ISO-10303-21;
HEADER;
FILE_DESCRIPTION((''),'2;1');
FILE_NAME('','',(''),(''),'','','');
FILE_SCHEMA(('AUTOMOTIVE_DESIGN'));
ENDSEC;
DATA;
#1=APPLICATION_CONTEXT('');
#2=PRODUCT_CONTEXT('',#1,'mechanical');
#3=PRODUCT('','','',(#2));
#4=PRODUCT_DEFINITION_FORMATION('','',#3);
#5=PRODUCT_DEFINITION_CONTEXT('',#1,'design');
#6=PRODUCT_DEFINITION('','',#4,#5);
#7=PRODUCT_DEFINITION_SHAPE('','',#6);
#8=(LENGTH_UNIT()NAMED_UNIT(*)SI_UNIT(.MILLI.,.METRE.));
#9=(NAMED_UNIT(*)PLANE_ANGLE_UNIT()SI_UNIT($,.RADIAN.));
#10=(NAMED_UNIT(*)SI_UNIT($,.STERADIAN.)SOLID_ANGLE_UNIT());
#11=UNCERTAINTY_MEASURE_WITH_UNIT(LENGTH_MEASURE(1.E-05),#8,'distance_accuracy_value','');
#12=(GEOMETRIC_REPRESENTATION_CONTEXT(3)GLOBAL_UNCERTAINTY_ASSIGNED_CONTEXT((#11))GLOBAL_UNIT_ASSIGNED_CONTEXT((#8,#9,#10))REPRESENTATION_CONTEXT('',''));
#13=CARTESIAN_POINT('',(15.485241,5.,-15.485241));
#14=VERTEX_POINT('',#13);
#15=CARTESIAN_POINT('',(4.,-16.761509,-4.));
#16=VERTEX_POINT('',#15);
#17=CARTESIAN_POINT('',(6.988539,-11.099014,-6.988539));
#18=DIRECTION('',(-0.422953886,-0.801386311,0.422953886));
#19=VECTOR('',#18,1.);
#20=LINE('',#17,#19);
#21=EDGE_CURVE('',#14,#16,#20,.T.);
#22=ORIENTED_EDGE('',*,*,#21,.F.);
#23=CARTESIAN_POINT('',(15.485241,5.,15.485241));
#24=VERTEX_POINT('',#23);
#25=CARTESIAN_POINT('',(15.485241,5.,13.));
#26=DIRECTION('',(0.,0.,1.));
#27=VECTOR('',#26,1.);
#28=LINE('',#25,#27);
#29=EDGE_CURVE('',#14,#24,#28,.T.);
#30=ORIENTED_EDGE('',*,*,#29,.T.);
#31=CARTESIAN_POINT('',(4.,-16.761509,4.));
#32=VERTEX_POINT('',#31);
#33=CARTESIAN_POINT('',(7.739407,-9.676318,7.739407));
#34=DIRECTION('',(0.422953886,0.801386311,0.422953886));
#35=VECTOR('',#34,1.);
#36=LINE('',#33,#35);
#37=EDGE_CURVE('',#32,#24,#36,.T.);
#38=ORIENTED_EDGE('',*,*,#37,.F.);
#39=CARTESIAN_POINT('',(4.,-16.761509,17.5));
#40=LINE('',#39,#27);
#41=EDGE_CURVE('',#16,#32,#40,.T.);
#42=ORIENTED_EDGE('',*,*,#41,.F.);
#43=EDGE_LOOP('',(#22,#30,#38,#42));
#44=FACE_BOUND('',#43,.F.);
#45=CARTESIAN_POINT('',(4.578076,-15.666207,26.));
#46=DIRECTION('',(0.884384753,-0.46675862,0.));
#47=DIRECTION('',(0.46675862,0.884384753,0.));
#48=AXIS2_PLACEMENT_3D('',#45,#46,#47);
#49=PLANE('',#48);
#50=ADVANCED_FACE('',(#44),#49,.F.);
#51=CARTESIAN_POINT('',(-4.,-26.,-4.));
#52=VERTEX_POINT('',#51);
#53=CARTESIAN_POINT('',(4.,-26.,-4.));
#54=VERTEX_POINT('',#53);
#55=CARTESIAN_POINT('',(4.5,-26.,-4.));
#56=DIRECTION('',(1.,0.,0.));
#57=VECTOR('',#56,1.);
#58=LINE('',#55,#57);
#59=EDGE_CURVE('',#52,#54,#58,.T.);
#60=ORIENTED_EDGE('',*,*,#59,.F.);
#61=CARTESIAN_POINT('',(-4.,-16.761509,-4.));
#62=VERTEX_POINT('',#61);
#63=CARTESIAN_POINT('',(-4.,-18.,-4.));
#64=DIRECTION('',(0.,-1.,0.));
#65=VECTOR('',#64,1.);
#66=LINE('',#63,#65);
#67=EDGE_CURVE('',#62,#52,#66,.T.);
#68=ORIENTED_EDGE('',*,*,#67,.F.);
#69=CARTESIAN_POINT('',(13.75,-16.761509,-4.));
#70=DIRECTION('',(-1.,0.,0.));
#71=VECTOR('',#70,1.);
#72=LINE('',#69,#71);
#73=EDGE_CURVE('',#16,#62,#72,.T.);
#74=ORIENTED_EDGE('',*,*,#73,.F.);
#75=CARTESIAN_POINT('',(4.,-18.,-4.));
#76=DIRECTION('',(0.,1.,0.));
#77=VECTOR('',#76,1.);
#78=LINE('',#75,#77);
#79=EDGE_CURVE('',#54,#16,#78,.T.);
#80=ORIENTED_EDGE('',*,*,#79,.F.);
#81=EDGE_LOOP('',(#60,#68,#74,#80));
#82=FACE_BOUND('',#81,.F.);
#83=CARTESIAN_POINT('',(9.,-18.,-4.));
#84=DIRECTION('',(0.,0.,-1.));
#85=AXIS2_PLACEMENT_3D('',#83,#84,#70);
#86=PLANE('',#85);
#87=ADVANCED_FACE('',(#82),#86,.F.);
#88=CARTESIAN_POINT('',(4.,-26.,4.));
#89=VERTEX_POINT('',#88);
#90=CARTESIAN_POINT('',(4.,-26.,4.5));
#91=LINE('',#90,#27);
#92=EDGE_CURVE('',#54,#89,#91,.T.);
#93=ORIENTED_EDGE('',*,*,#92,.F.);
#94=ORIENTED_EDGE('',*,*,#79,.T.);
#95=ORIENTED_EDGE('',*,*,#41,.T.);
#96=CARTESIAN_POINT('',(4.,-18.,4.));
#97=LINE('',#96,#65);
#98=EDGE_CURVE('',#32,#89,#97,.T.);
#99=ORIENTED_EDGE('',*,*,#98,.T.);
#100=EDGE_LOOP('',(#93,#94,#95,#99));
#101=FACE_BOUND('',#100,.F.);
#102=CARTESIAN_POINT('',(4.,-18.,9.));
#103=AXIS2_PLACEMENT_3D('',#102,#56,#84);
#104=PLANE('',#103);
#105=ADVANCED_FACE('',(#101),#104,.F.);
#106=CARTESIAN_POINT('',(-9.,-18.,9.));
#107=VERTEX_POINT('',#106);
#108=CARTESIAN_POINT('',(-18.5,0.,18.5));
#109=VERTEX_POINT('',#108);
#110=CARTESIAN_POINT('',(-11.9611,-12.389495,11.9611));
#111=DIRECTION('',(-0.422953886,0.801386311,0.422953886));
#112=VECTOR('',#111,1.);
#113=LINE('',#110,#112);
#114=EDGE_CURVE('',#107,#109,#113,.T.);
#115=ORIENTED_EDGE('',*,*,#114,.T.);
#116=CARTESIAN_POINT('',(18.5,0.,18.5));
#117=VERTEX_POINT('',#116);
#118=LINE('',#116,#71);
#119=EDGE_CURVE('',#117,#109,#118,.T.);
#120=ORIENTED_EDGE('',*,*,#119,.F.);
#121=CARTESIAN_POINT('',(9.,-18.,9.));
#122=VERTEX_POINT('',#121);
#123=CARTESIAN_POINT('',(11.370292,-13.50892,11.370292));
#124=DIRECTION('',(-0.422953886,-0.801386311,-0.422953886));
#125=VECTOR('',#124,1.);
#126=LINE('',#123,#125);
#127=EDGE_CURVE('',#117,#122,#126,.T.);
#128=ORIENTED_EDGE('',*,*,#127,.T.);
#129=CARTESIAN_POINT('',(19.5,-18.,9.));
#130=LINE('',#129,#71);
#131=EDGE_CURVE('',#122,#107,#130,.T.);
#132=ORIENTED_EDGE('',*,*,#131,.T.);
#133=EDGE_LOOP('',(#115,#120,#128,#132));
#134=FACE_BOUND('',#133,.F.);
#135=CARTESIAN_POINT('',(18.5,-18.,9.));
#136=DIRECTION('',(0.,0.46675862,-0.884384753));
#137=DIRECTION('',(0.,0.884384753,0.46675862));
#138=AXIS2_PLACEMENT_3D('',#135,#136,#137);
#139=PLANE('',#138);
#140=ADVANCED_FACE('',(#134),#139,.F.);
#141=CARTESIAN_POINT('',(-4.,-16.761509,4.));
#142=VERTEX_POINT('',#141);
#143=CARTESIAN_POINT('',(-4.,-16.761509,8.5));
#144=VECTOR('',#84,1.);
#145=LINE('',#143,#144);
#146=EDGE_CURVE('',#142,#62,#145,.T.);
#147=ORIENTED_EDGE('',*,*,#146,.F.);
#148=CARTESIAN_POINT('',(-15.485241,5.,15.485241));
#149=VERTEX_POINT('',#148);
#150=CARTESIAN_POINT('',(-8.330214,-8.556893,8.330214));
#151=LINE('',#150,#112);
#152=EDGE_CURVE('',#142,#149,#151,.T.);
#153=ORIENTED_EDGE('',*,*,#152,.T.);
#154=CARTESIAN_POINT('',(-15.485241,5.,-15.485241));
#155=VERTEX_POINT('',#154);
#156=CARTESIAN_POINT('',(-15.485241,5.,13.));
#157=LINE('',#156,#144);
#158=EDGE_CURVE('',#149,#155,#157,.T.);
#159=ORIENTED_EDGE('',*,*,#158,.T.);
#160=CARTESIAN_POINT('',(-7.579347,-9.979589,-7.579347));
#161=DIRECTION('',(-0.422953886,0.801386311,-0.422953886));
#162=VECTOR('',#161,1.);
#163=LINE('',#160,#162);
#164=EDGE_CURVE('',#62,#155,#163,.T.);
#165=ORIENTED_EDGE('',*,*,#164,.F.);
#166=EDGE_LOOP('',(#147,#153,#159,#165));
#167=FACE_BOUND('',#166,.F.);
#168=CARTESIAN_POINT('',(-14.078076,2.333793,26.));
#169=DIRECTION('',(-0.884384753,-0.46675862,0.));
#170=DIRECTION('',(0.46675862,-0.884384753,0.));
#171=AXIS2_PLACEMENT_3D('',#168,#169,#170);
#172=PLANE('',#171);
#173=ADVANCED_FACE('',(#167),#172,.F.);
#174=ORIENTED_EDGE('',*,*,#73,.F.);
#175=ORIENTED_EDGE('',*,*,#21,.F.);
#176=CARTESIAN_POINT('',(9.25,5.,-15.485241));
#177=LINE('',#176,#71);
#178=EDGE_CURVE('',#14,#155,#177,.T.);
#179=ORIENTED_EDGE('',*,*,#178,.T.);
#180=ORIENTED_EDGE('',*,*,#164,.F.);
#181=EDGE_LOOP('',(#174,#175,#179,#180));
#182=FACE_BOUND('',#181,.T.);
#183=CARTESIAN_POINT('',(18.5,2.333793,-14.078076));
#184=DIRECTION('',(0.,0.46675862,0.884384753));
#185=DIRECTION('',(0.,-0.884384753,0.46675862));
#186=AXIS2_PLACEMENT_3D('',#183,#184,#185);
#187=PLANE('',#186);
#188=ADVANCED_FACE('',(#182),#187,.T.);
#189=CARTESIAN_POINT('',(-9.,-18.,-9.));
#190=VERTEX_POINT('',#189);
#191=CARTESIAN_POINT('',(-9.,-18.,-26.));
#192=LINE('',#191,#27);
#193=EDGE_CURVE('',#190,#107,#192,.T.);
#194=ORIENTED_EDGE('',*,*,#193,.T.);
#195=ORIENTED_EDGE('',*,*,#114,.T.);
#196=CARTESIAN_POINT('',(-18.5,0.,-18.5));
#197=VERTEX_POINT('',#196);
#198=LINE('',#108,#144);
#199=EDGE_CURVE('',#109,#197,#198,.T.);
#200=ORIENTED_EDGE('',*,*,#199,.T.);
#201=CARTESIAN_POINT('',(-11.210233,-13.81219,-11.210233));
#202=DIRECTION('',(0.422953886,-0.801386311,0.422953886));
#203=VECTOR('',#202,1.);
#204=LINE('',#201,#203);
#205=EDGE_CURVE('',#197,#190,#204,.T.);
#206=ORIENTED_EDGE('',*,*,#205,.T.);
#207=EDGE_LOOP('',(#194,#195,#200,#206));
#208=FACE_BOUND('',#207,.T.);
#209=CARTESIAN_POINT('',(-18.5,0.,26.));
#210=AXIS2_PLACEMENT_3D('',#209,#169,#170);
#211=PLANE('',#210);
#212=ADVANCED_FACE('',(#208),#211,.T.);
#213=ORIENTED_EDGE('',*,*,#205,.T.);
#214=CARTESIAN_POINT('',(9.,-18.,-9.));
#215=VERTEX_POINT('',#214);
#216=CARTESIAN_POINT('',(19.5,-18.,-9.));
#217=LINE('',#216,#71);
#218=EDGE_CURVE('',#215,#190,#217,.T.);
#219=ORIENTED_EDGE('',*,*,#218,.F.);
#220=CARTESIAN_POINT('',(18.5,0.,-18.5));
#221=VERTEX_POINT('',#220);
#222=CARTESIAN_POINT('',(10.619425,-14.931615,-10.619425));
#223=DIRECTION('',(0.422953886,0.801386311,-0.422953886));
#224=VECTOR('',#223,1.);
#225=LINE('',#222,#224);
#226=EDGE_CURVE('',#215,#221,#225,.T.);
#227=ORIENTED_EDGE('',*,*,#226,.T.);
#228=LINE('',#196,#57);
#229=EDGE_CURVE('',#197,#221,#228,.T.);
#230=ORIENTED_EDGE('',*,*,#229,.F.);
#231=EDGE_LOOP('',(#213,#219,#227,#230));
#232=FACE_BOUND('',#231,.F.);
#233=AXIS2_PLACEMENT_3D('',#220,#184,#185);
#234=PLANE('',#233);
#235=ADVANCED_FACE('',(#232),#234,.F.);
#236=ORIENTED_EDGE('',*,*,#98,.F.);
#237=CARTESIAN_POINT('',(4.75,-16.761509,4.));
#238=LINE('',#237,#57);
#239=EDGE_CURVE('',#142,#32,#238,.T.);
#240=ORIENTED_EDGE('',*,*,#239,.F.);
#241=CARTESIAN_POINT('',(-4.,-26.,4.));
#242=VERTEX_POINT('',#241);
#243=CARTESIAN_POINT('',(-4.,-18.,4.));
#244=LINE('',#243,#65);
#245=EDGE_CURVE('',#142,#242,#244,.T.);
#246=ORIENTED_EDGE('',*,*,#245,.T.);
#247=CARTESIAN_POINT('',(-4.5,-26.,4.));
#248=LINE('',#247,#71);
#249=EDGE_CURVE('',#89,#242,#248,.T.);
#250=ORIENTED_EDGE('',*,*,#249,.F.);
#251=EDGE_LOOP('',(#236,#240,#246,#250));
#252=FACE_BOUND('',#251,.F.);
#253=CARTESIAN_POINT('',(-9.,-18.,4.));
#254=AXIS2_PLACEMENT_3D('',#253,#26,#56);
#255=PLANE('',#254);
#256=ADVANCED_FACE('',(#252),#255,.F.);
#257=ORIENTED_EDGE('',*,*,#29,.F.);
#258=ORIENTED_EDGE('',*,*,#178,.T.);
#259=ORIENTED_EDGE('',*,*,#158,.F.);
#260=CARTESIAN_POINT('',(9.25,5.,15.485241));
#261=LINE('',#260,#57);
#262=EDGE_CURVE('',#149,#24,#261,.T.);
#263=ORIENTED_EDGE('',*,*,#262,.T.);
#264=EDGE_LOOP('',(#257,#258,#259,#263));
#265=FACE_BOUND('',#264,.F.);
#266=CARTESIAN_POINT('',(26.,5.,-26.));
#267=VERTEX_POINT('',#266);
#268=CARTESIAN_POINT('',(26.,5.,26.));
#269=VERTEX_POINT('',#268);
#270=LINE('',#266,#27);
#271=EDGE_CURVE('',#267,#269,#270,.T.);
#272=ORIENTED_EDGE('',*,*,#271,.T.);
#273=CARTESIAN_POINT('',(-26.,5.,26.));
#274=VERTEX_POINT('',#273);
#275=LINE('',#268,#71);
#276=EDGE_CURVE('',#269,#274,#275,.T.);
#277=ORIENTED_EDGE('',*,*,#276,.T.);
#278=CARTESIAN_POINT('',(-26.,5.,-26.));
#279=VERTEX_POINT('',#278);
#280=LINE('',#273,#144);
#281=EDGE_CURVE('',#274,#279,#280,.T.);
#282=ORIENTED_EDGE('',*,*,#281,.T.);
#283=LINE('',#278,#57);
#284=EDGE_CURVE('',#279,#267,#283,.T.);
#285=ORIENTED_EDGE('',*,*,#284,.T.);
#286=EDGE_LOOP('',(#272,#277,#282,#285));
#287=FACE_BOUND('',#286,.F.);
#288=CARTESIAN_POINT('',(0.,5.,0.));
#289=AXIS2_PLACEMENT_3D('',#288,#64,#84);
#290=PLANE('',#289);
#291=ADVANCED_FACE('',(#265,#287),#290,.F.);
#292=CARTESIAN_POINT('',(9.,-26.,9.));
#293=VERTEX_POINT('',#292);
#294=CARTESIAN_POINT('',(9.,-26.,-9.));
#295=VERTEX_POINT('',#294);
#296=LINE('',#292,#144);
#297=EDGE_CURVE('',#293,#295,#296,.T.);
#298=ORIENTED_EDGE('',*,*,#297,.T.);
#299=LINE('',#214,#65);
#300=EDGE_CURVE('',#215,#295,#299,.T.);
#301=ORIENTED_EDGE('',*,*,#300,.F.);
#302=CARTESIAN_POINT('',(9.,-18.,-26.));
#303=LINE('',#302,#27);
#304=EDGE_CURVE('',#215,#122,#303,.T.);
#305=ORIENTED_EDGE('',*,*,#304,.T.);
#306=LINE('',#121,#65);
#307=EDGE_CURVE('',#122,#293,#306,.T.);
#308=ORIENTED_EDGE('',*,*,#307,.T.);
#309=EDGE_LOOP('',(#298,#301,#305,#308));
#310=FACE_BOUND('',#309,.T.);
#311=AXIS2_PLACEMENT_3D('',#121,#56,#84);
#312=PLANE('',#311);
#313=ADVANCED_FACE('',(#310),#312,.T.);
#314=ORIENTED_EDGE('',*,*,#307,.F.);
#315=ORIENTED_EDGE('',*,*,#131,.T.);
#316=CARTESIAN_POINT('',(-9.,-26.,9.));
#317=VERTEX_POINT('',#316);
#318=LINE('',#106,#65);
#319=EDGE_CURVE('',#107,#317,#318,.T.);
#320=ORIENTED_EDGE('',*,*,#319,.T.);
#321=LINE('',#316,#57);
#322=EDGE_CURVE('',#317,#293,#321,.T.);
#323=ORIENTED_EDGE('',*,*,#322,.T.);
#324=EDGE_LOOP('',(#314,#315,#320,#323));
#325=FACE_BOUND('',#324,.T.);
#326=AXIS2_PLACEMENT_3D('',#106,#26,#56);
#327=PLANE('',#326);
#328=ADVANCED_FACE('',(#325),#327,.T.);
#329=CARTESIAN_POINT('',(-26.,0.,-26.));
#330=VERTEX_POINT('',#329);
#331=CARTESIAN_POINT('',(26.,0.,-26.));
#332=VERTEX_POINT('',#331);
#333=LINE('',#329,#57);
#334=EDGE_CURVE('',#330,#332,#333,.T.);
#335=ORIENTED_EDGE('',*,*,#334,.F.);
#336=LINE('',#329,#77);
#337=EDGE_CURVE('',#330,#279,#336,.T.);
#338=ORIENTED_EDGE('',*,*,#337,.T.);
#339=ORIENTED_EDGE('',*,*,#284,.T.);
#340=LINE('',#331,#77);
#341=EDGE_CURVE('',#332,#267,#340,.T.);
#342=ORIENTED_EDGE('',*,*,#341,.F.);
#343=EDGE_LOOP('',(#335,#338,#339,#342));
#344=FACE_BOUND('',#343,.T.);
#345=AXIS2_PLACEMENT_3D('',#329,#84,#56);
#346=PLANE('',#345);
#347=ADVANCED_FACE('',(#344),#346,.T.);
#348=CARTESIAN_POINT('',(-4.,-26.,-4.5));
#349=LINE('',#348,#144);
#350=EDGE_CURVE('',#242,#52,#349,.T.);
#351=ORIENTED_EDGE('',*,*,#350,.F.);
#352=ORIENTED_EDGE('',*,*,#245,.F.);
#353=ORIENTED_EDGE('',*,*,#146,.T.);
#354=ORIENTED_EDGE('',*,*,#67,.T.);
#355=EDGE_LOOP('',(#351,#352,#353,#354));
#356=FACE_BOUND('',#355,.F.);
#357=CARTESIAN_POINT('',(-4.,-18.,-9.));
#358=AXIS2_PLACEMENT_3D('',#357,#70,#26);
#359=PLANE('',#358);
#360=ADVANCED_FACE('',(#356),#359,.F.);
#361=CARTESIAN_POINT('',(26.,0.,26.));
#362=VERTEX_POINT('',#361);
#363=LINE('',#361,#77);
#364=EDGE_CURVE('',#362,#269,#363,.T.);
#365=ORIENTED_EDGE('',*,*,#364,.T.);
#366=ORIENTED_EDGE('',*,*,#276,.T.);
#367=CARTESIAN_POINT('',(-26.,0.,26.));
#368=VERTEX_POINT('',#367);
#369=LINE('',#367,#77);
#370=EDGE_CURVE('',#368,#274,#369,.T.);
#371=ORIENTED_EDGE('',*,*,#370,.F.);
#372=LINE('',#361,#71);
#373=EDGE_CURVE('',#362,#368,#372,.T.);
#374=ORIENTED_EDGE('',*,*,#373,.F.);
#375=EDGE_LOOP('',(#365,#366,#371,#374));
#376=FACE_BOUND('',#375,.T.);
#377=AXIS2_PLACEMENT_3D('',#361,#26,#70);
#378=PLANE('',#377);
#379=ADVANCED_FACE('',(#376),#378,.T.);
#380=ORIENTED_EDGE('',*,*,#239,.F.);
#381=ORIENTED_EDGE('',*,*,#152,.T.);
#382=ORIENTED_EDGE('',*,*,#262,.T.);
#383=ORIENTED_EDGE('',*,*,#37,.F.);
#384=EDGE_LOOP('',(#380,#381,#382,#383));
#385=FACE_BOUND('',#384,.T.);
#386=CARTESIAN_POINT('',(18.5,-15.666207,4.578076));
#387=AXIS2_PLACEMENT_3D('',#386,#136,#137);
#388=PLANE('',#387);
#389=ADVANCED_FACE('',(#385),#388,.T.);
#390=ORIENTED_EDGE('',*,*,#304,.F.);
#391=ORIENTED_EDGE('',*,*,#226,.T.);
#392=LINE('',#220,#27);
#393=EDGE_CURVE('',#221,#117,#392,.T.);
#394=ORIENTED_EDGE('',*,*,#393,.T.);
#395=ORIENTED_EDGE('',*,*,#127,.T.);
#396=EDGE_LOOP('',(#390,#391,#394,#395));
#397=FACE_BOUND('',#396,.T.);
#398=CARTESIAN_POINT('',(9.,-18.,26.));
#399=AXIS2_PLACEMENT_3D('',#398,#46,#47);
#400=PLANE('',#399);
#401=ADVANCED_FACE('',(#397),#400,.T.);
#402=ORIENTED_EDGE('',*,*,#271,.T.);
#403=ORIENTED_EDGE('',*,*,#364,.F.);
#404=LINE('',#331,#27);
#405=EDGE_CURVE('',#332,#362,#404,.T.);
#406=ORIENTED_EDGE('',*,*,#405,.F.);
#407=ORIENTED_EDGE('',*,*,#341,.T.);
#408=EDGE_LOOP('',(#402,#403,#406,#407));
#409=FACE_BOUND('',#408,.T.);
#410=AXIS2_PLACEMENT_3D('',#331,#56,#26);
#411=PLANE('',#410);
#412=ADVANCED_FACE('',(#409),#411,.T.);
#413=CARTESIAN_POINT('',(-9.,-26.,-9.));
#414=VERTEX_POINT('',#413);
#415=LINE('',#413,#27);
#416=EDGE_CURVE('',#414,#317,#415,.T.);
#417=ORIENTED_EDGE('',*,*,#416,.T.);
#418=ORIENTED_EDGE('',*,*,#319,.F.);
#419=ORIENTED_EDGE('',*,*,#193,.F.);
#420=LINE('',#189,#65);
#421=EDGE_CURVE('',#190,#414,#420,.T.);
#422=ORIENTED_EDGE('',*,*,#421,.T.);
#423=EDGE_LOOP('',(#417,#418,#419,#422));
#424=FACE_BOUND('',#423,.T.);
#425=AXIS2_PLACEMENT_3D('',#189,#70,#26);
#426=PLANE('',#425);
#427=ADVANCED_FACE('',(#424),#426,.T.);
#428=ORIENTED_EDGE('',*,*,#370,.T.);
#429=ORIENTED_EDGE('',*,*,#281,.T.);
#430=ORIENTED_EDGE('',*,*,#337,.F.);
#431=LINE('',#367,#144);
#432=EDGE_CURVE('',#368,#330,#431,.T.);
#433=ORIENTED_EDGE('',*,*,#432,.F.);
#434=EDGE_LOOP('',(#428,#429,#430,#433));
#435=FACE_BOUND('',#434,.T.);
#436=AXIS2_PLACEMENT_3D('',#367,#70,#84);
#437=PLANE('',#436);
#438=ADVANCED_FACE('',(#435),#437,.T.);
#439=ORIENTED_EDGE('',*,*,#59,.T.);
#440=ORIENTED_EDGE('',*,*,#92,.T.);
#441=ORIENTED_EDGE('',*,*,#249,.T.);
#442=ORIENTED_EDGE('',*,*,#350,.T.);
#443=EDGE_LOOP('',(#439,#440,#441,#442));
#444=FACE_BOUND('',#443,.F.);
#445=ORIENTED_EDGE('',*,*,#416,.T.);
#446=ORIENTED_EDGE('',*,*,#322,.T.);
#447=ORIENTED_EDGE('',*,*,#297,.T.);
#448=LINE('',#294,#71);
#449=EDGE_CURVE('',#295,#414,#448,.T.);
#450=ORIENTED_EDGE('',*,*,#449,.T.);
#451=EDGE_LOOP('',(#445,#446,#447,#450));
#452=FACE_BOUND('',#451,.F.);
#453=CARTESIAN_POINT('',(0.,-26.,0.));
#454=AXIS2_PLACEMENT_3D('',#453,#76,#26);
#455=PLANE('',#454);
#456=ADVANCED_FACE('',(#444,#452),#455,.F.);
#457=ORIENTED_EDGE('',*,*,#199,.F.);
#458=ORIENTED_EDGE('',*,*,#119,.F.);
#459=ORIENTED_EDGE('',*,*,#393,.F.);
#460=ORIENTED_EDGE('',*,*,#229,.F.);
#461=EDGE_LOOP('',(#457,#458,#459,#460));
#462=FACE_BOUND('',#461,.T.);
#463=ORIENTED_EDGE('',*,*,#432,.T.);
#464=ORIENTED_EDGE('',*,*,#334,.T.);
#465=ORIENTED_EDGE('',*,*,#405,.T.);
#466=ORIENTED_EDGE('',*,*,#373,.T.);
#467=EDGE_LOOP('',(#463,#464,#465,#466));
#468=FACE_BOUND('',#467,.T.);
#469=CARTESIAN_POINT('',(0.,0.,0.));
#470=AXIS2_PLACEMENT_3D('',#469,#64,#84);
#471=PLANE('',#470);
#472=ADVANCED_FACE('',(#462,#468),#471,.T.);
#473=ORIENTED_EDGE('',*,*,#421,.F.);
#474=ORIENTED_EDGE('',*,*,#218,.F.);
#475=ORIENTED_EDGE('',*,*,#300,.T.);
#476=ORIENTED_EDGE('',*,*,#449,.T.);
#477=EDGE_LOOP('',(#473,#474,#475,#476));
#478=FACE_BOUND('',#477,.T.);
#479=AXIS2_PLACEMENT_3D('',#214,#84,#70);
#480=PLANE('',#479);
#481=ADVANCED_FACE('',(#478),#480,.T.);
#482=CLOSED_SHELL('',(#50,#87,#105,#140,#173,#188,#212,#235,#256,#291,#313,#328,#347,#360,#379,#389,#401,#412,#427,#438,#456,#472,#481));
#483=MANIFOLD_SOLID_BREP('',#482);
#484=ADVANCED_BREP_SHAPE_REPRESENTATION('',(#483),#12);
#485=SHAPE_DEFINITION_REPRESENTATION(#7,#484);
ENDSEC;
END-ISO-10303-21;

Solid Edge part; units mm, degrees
sketch "Sketch1" plane through (0, 0, 0) normal (0, -1, 0) x (1, 0, 0)
  line L0 (18.5, -18.5) -> (18.5, 18.5)
  line L1 (18.5, 18.5) -> (-18.5, 18.5)
  line L2 (-18.5, 18.5) -> (-18.5, -18.5)
  line L3 (-18.5, -18.5) -> (18.5, -18.5)
extrude "Protrusion1" add sketch "Sketch1" along normal blind 18
sketch "Sketch2" plane through (18.5, -9, 0) normal (1, 0, 0) x (0, 0, 1)
  line L0 (-9, 9) -> (-18.5, 9)
  line L1 (-18.5, 9) -> (-18.5, -9)
  line L2 (-18.5, -9) -> (-9, 9)
  line L3 (9, 9) -> (18.5, -9)
  line L4 (18.5, -9) -> (18.5, 9)
  line L5 (18.5, 9) -> (9, 9)
extrude "ExtrudedCutout_5" cut sketch "Sketch2" against normal blind 37 and the other way blind 1
extrude "ExtrudedCutout_6" [suppressed]
sketch "Sketch3" plane through (0, -9, 26) normal (0, 0, 1) x (-1, 0, 0)
  line L0 (-9, 9) -> (-18.5, -9)
  line L1 (-18.5, -9) -> (-26, -9)
  line L2 (-26, -9) -> (-26, 9)
  line L3 (-26, 9) -> (-9, 9)
  line L4 (9, 9) -> (26, 9)
  line L5 (26, 9) -> (26, -9)
  line L6 (26, -9) -> (18.5, -9)
  line L7 (18.5, -9) -> (9, 9)
extrude "ExtrudedCutout_7" cut sketch "Sketch3" against normal blind 52 and the other way blind 1
sketch "Sketch4" plane through (0, 0, 0) normal (0, -1, 0) x (1, 0, 0)
  line L0 (26, 26) -> (-26, 26)
  line L1 (-26, 26) -> (-26, -26)
  line L2 (-26, -26) -> (26, -26)
  line L3 (26, -26) -> (26, 26)
extrude "ExtrudedProtrusion_7" add sketch "Sketch4" against normal blind 5
sketch "Sketch5" plane through (0, -18, 0) normal (0, -1, 0) x (-1, 0, 0)
  line L0 (9, -9) -> (-9, -9)
  line L1 (-9, -9) -> (-9, 9)
  line L2 (-9, 9) -> (9, 9)
  line L3 (9, 9) -> (9, -9)
extrude "ExtrudedProtrusion_8" add sketch "Sketch5" along normal blind 8
shell "Thinwall1" thickness 5 removed faces 2 at (-16.8133, 5, 17.8533) at (-5.82, -26, -6.18)
shell "Thinwall2" [suppressed]
